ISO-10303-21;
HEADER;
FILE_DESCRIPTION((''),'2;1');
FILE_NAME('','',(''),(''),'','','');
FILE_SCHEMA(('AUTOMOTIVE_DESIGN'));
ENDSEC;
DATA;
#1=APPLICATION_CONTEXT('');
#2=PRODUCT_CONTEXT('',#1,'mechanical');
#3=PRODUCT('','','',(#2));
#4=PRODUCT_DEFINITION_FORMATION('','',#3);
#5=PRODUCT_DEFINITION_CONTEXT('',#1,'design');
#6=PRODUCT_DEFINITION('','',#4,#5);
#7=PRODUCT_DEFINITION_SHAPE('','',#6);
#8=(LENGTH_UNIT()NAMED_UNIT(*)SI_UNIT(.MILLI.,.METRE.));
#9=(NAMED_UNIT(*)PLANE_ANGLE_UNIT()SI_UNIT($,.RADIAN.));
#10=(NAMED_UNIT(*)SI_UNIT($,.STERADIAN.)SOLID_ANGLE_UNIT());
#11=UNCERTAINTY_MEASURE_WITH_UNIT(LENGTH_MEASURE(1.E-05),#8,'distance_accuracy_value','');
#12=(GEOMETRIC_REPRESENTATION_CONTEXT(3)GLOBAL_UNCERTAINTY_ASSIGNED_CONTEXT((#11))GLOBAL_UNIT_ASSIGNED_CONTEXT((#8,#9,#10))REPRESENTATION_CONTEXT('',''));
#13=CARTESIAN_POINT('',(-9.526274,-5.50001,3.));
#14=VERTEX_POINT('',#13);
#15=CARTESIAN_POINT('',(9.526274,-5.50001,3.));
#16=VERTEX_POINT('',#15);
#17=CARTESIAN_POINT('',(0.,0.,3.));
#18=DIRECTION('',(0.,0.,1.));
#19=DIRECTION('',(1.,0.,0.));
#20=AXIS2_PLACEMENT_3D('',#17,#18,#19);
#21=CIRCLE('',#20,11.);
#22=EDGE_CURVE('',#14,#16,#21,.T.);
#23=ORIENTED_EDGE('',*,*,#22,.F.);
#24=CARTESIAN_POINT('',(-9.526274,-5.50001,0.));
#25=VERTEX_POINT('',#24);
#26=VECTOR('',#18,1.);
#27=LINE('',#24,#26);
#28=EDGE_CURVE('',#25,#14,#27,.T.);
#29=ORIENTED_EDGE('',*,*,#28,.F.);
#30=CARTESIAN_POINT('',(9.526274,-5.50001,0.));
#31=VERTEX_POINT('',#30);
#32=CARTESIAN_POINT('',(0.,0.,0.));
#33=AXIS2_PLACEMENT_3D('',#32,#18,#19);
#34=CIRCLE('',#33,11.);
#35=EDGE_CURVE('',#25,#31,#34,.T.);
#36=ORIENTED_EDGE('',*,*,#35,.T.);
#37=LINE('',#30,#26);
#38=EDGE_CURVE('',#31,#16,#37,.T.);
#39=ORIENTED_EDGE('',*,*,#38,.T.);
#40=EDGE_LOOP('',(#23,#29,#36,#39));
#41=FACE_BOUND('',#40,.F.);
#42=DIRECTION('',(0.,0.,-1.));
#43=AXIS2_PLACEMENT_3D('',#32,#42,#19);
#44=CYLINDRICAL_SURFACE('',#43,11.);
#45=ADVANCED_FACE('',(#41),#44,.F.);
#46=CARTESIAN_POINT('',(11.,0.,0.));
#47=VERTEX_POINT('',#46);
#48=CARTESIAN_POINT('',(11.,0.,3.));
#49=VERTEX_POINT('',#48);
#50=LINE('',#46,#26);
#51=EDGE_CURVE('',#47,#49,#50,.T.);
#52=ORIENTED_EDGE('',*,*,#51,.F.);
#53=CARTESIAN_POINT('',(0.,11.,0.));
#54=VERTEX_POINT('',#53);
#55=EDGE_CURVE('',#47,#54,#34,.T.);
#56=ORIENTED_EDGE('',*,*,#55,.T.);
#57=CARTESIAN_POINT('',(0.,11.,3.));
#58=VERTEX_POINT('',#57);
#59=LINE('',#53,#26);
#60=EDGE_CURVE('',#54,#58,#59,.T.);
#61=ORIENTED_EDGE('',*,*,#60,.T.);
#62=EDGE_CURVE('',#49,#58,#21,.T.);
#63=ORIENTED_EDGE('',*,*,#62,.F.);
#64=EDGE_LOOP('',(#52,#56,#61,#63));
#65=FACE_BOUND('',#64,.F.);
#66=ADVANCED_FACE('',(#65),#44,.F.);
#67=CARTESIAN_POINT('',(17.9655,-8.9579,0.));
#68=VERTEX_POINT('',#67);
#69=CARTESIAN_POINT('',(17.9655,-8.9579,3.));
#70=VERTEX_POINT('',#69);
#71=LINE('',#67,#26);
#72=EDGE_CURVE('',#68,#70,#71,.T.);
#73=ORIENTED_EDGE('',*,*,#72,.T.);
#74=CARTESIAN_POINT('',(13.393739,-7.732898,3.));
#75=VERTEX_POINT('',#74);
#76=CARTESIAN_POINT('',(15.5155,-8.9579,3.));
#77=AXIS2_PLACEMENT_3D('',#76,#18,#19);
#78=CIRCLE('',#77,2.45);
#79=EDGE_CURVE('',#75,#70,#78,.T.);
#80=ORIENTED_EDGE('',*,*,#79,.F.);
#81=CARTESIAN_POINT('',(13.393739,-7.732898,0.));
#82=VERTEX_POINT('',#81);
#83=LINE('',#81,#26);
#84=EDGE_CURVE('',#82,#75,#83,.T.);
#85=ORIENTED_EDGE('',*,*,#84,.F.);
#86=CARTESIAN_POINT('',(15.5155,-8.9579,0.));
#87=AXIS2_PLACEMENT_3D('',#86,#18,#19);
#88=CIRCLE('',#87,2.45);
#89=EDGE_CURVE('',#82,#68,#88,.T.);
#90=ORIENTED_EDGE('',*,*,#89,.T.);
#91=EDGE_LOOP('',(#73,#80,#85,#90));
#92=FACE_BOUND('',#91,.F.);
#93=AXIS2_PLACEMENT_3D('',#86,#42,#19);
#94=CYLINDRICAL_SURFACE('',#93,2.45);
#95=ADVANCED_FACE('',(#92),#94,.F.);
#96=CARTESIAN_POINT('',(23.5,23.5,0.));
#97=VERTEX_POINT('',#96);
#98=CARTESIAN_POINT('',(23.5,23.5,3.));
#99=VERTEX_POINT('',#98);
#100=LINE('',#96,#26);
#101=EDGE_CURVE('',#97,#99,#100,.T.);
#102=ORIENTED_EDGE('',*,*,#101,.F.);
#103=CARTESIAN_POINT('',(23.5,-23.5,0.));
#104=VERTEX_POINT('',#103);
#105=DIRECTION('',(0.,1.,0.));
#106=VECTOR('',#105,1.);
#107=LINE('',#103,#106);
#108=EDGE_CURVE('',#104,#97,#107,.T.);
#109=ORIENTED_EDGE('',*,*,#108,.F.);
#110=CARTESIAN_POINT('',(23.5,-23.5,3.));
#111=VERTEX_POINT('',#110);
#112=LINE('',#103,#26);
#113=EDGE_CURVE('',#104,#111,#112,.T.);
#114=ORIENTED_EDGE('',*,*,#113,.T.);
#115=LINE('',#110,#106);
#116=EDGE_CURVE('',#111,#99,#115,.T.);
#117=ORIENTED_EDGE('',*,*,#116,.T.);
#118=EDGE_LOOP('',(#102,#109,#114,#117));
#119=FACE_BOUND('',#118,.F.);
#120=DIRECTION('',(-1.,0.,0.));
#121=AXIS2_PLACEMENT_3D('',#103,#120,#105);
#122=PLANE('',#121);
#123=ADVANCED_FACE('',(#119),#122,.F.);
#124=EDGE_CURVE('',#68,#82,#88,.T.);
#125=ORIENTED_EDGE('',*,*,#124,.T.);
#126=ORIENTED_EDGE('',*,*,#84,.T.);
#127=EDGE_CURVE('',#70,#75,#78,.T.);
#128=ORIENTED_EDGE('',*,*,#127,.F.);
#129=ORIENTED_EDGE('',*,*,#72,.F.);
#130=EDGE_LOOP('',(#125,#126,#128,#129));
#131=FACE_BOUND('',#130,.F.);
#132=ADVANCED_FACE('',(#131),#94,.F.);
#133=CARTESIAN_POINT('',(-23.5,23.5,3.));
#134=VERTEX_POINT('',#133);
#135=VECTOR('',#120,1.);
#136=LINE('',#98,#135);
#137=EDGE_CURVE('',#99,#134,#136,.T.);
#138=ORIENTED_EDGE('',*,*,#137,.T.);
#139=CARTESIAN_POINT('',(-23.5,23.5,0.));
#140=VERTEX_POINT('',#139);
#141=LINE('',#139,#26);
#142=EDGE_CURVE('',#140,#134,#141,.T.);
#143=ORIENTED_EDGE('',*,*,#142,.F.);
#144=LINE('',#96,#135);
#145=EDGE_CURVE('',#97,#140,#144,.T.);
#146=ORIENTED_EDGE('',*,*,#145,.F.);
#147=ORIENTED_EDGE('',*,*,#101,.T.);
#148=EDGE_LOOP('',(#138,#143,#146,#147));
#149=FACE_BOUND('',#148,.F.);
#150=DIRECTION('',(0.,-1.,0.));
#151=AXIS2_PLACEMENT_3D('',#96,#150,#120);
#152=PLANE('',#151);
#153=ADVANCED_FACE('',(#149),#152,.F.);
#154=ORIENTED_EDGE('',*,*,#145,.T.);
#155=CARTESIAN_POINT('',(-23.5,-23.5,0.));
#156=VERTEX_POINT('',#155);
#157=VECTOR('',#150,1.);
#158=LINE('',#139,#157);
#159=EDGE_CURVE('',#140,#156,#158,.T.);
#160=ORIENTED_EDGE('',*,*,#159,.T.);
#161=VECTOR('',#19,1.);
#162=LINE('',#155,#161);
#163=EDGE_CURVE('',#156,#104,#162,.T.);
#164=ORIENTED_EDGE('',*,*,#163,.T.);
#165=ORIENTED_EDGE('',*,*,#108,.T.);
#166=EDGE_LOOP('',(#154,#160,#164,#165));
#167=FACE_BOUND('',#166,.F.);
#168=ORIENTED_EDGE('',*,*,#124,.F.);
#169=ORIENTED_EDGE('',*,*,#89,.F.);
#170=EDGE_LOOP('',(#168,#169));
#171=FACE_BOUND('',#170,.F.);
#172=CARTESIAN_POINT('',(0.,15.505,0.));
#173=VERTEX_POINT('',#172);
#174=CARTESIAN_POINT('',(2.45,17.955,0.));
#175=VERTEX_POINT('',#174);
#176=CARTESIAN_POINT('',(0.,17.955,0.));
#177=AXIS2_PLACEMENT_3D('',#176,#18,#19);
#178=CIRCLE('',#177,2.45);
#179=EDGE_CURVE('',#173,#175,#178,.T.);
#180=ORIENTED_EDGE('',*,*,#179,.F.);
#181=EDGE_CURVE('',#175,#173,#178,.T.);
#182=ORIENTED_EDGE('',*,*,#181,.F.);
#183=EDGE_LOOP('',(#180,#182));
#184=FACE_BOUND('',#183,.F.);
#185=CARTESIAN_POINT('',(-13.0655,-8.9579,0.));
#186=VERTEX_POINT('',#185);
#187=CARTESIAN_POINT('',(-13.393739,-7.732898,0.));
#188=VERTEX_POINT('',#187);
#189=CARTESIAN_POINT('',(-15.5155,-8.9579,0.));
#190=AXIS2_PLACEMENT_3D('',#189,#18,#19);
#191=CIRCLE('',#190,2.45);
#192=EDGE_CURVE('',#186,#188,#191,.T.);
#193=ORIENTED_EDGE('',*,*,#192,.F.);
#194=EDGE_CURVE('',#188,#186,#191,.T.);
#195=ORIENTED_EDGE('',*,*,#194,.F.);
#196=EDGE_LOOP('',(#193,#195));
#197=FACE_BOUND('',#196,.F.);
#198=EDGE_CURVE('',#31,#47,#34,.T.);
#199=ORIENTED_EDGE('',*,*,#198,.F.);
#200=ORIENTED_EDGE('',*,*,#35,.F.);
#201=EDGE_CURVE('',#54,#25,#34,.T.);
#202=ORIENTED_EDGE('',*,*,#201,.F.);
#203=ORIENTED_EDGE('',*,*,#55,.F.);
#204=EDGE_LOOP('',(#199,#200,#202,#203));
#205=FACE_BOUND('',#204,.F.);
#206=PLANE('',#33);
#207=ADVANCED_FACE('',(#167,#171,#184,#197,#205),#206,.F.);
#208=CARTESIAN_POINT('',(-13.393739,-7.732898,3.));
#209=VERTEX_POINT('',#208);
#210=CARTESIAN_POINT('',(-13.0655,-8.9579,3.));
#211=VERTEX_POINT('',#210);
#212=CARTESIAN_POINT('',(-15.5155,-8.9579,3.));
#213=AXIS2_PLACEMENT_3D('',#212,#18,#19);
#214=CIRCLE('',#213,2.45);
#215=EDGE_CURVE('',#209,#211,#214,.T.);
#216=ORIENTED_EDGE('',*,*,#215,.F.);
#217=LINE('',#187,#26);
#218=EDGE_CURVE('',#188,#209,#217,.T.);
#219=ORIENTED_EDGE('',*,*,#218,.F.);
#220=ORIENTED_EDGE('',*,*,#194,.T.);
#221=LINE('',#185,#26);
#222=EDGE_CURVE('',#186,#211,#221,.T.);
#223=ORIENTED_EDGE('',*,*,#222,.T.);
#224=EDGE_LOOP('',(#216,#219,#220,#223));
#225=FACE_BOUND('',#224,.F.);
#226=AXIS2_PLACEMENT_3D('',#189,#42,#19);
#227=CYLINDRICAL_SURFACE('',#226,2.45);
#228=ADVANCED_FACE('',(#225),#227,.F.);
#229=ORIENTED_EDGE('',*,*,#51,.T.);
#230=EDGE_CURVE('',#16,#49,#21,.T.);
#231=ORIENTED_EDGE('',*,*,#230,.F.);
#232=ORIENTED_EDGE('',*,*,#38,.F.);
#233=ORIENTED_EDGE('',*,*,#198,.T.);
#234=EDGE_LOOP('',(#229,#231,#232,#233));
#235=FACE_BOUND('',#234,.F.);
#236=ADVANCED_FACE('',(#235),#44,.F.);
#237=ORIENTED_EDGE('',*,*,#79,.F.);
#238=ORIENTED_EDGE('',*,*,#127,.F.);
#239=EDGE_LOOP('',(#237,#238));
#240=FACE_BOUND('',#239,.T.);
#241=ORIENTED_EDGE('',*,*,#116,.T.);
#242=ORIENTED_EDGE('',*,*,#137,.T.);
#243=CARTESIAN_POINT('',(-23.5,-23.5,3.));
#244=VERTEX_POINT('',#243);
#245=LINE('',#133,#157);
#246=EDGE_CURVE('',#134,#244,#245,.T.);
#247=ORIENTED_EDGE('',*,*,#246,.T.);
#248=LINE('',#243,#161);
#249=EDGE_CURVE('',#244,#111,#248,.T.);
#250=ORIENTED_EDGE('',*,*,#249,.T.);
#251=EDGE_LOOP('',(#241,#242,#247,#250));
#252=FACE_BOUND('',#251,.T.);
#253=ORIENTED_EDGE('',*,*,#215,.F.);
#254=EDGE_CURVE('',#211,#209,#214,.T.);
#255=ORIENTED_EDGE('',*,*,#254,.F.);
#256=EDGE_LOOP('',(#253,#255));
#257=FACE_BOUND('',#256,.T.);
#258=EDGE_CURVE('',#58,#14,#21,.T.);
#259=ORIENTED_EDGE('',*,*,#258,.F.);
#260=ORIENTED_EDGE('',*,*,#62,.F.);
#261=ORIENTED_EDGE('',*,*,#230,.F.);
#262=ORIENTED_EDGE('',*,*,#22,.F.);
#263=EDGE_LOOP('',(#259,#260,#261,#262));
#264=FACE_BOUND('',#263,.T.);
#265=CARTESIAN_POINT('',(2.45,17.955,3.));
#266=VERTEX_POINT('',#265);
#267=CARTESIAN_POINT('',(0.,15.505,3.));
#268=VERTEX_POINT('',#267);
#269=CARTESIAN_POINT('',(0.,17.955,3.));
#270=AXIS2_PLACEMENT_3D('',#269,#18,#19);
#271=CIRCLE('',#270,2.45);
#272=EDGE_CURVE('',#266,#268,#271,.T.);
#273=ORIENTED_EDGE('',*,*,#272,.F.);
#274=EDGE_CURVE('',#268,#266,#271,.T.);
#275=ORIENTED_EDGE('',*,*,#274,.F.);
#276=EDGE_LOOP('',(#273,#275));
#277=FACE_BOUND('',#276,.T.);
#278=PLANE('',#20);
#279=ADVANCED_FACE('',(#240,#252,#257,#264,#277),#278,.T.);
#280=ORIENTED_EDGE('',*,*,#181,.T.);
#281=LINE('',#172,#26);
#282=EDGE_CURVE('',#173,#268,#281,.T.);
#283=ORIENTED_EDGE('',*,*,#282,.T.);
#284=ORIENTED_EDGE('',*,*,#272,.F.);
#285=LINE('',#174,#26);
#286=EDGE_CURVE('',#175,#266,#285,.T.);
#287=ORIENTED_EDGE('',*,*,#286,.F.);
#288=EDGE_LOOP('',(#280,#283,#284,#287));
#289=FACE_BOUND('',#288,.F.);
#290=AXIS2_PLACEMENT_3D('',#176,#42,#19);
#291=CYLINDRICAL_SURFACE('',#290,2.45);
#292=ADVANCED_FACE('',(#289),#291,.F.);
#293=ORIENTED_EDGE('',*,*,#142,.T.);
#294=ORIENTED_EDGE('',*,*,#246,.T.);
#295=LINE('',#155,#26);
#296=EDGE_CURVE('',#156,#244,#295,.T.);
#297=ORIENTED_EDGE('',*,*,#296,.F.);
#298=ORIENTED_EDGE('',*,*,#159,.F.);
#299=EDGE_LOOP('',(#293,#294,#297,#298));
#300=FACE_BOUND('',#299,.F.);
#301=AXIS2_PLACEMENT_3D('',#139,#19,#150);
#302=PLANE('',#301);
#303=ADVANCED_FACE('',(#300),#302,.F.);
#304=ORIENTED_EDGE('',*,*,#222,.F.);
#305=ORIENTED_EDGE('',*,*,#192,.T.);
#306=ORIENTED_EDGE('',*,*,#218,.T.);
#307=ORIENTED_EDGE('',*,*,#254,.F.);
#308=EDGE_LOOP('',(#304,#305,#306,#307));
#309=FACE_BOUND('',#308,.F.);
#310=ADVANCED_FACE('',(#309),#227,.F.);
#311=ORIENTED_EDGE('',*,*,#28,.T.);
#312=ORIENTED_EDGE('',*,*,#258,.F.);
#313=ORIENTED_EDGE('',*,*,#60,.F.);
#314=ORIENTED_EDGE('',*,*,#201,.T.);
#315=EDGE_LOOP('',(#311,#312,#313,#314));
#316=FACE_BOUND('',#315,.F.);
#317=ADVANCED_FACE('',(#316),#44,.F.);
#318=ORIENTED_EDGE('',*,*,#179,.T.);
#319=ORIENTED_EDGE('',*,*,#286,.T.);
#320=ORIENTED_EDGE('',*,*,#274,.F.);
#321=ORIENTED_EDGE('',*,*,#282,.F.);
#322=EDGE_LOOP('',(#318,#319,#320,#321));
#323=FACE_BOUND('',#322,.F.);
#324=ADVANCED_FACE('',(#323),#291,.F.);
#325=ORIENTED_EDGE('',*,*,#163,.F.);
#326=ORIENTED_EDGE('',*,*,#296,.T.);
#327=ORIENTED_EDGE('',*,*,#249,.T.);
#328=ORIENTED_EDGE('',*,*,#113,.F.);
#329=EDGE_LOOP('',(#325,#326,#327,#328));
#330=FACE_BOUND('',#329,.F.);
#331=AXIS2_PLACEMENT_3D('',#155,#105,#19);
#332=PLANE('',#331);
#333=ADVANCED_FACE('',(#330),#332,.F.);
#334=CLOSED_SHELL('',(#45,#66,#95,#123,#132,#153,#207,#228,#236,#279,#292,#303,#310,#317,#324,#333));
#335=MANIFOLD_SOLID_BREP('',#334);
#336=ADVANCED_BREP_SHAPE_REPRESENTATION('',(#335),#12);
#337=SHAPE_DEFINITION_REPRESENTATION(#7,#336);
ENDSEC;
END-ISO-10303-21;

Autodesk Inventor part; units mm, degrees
ref_plane "YZ Plane" through (0, 0, 0) normal (1, 0, 0) x (0, 1, 0)
ref_plane "XZ Plane" through (0, 0, 0) normal (0, 1, 0) x (-1, 0, 0)
ref_plane "XY Plane" through (0, 0, 0) normal (0, 0, 1) x (1, 0, 0)
sketch "Sketch1" plane through (0, 0, 0) normal (0, 0, 1) x (1, 0, 0)
  line L0 (-23.5, -23.5) -> (23.5, -23.5)
  line L1 (23.5, -23.5) -> (23.5, 23.5)
  line L2 (23.5, 23.5) -> (-23.5, 23.5)
  line L3 (-23.5, 23.5) -> (-23.5, -23.5)
  line L4 (-23.5, -23.5) -> (23.5, 23.5) construction
  line L5 (23.5, -23.5) -> (-23.5, 23.5) construction
  circle A0 centre (0, 0) radius 11
  line L6 (0, 0) -> (0, 17.955)
  line L7 (0, 0) -> (15.5155, -8.9579)
  line L8 (0, 0) -> (-15.5155, -8.9579)
  circle A1 centre (0, 17.955) radius 2.45
  circle A2 centre (15.5155, -8.9579) radius 2.45
  circle A3 centre (-15.5155, -8.9579) radius 2.45
  point P0 (23.5, -10.0947)
  point P1 (-23.5, -10.0947)
  dimension "d0" = 47
  dimension "d1" = 47
  dimension "d2" = 22
  dimension "d3" = 17.955
  dimension "d4" = 15.5155
  dimension "d5" = 120
  dimension "d6" = 15.5155
  dimension "d7" = 120
  dimension "d8" = 4.9
  dimension "d9" = 4.9
  dimension "d10" = 4.9
extrude "Extrusion2" add sketch "Sketch1" along normal blind 3
equation "\"d1\" = d0"
equation "\"d4\" = d6"
equation "\"d7\" = d5"
equation "\"d9\" = d8"
equation "\"d10\" = d8"
properties part number "mount_v02"
